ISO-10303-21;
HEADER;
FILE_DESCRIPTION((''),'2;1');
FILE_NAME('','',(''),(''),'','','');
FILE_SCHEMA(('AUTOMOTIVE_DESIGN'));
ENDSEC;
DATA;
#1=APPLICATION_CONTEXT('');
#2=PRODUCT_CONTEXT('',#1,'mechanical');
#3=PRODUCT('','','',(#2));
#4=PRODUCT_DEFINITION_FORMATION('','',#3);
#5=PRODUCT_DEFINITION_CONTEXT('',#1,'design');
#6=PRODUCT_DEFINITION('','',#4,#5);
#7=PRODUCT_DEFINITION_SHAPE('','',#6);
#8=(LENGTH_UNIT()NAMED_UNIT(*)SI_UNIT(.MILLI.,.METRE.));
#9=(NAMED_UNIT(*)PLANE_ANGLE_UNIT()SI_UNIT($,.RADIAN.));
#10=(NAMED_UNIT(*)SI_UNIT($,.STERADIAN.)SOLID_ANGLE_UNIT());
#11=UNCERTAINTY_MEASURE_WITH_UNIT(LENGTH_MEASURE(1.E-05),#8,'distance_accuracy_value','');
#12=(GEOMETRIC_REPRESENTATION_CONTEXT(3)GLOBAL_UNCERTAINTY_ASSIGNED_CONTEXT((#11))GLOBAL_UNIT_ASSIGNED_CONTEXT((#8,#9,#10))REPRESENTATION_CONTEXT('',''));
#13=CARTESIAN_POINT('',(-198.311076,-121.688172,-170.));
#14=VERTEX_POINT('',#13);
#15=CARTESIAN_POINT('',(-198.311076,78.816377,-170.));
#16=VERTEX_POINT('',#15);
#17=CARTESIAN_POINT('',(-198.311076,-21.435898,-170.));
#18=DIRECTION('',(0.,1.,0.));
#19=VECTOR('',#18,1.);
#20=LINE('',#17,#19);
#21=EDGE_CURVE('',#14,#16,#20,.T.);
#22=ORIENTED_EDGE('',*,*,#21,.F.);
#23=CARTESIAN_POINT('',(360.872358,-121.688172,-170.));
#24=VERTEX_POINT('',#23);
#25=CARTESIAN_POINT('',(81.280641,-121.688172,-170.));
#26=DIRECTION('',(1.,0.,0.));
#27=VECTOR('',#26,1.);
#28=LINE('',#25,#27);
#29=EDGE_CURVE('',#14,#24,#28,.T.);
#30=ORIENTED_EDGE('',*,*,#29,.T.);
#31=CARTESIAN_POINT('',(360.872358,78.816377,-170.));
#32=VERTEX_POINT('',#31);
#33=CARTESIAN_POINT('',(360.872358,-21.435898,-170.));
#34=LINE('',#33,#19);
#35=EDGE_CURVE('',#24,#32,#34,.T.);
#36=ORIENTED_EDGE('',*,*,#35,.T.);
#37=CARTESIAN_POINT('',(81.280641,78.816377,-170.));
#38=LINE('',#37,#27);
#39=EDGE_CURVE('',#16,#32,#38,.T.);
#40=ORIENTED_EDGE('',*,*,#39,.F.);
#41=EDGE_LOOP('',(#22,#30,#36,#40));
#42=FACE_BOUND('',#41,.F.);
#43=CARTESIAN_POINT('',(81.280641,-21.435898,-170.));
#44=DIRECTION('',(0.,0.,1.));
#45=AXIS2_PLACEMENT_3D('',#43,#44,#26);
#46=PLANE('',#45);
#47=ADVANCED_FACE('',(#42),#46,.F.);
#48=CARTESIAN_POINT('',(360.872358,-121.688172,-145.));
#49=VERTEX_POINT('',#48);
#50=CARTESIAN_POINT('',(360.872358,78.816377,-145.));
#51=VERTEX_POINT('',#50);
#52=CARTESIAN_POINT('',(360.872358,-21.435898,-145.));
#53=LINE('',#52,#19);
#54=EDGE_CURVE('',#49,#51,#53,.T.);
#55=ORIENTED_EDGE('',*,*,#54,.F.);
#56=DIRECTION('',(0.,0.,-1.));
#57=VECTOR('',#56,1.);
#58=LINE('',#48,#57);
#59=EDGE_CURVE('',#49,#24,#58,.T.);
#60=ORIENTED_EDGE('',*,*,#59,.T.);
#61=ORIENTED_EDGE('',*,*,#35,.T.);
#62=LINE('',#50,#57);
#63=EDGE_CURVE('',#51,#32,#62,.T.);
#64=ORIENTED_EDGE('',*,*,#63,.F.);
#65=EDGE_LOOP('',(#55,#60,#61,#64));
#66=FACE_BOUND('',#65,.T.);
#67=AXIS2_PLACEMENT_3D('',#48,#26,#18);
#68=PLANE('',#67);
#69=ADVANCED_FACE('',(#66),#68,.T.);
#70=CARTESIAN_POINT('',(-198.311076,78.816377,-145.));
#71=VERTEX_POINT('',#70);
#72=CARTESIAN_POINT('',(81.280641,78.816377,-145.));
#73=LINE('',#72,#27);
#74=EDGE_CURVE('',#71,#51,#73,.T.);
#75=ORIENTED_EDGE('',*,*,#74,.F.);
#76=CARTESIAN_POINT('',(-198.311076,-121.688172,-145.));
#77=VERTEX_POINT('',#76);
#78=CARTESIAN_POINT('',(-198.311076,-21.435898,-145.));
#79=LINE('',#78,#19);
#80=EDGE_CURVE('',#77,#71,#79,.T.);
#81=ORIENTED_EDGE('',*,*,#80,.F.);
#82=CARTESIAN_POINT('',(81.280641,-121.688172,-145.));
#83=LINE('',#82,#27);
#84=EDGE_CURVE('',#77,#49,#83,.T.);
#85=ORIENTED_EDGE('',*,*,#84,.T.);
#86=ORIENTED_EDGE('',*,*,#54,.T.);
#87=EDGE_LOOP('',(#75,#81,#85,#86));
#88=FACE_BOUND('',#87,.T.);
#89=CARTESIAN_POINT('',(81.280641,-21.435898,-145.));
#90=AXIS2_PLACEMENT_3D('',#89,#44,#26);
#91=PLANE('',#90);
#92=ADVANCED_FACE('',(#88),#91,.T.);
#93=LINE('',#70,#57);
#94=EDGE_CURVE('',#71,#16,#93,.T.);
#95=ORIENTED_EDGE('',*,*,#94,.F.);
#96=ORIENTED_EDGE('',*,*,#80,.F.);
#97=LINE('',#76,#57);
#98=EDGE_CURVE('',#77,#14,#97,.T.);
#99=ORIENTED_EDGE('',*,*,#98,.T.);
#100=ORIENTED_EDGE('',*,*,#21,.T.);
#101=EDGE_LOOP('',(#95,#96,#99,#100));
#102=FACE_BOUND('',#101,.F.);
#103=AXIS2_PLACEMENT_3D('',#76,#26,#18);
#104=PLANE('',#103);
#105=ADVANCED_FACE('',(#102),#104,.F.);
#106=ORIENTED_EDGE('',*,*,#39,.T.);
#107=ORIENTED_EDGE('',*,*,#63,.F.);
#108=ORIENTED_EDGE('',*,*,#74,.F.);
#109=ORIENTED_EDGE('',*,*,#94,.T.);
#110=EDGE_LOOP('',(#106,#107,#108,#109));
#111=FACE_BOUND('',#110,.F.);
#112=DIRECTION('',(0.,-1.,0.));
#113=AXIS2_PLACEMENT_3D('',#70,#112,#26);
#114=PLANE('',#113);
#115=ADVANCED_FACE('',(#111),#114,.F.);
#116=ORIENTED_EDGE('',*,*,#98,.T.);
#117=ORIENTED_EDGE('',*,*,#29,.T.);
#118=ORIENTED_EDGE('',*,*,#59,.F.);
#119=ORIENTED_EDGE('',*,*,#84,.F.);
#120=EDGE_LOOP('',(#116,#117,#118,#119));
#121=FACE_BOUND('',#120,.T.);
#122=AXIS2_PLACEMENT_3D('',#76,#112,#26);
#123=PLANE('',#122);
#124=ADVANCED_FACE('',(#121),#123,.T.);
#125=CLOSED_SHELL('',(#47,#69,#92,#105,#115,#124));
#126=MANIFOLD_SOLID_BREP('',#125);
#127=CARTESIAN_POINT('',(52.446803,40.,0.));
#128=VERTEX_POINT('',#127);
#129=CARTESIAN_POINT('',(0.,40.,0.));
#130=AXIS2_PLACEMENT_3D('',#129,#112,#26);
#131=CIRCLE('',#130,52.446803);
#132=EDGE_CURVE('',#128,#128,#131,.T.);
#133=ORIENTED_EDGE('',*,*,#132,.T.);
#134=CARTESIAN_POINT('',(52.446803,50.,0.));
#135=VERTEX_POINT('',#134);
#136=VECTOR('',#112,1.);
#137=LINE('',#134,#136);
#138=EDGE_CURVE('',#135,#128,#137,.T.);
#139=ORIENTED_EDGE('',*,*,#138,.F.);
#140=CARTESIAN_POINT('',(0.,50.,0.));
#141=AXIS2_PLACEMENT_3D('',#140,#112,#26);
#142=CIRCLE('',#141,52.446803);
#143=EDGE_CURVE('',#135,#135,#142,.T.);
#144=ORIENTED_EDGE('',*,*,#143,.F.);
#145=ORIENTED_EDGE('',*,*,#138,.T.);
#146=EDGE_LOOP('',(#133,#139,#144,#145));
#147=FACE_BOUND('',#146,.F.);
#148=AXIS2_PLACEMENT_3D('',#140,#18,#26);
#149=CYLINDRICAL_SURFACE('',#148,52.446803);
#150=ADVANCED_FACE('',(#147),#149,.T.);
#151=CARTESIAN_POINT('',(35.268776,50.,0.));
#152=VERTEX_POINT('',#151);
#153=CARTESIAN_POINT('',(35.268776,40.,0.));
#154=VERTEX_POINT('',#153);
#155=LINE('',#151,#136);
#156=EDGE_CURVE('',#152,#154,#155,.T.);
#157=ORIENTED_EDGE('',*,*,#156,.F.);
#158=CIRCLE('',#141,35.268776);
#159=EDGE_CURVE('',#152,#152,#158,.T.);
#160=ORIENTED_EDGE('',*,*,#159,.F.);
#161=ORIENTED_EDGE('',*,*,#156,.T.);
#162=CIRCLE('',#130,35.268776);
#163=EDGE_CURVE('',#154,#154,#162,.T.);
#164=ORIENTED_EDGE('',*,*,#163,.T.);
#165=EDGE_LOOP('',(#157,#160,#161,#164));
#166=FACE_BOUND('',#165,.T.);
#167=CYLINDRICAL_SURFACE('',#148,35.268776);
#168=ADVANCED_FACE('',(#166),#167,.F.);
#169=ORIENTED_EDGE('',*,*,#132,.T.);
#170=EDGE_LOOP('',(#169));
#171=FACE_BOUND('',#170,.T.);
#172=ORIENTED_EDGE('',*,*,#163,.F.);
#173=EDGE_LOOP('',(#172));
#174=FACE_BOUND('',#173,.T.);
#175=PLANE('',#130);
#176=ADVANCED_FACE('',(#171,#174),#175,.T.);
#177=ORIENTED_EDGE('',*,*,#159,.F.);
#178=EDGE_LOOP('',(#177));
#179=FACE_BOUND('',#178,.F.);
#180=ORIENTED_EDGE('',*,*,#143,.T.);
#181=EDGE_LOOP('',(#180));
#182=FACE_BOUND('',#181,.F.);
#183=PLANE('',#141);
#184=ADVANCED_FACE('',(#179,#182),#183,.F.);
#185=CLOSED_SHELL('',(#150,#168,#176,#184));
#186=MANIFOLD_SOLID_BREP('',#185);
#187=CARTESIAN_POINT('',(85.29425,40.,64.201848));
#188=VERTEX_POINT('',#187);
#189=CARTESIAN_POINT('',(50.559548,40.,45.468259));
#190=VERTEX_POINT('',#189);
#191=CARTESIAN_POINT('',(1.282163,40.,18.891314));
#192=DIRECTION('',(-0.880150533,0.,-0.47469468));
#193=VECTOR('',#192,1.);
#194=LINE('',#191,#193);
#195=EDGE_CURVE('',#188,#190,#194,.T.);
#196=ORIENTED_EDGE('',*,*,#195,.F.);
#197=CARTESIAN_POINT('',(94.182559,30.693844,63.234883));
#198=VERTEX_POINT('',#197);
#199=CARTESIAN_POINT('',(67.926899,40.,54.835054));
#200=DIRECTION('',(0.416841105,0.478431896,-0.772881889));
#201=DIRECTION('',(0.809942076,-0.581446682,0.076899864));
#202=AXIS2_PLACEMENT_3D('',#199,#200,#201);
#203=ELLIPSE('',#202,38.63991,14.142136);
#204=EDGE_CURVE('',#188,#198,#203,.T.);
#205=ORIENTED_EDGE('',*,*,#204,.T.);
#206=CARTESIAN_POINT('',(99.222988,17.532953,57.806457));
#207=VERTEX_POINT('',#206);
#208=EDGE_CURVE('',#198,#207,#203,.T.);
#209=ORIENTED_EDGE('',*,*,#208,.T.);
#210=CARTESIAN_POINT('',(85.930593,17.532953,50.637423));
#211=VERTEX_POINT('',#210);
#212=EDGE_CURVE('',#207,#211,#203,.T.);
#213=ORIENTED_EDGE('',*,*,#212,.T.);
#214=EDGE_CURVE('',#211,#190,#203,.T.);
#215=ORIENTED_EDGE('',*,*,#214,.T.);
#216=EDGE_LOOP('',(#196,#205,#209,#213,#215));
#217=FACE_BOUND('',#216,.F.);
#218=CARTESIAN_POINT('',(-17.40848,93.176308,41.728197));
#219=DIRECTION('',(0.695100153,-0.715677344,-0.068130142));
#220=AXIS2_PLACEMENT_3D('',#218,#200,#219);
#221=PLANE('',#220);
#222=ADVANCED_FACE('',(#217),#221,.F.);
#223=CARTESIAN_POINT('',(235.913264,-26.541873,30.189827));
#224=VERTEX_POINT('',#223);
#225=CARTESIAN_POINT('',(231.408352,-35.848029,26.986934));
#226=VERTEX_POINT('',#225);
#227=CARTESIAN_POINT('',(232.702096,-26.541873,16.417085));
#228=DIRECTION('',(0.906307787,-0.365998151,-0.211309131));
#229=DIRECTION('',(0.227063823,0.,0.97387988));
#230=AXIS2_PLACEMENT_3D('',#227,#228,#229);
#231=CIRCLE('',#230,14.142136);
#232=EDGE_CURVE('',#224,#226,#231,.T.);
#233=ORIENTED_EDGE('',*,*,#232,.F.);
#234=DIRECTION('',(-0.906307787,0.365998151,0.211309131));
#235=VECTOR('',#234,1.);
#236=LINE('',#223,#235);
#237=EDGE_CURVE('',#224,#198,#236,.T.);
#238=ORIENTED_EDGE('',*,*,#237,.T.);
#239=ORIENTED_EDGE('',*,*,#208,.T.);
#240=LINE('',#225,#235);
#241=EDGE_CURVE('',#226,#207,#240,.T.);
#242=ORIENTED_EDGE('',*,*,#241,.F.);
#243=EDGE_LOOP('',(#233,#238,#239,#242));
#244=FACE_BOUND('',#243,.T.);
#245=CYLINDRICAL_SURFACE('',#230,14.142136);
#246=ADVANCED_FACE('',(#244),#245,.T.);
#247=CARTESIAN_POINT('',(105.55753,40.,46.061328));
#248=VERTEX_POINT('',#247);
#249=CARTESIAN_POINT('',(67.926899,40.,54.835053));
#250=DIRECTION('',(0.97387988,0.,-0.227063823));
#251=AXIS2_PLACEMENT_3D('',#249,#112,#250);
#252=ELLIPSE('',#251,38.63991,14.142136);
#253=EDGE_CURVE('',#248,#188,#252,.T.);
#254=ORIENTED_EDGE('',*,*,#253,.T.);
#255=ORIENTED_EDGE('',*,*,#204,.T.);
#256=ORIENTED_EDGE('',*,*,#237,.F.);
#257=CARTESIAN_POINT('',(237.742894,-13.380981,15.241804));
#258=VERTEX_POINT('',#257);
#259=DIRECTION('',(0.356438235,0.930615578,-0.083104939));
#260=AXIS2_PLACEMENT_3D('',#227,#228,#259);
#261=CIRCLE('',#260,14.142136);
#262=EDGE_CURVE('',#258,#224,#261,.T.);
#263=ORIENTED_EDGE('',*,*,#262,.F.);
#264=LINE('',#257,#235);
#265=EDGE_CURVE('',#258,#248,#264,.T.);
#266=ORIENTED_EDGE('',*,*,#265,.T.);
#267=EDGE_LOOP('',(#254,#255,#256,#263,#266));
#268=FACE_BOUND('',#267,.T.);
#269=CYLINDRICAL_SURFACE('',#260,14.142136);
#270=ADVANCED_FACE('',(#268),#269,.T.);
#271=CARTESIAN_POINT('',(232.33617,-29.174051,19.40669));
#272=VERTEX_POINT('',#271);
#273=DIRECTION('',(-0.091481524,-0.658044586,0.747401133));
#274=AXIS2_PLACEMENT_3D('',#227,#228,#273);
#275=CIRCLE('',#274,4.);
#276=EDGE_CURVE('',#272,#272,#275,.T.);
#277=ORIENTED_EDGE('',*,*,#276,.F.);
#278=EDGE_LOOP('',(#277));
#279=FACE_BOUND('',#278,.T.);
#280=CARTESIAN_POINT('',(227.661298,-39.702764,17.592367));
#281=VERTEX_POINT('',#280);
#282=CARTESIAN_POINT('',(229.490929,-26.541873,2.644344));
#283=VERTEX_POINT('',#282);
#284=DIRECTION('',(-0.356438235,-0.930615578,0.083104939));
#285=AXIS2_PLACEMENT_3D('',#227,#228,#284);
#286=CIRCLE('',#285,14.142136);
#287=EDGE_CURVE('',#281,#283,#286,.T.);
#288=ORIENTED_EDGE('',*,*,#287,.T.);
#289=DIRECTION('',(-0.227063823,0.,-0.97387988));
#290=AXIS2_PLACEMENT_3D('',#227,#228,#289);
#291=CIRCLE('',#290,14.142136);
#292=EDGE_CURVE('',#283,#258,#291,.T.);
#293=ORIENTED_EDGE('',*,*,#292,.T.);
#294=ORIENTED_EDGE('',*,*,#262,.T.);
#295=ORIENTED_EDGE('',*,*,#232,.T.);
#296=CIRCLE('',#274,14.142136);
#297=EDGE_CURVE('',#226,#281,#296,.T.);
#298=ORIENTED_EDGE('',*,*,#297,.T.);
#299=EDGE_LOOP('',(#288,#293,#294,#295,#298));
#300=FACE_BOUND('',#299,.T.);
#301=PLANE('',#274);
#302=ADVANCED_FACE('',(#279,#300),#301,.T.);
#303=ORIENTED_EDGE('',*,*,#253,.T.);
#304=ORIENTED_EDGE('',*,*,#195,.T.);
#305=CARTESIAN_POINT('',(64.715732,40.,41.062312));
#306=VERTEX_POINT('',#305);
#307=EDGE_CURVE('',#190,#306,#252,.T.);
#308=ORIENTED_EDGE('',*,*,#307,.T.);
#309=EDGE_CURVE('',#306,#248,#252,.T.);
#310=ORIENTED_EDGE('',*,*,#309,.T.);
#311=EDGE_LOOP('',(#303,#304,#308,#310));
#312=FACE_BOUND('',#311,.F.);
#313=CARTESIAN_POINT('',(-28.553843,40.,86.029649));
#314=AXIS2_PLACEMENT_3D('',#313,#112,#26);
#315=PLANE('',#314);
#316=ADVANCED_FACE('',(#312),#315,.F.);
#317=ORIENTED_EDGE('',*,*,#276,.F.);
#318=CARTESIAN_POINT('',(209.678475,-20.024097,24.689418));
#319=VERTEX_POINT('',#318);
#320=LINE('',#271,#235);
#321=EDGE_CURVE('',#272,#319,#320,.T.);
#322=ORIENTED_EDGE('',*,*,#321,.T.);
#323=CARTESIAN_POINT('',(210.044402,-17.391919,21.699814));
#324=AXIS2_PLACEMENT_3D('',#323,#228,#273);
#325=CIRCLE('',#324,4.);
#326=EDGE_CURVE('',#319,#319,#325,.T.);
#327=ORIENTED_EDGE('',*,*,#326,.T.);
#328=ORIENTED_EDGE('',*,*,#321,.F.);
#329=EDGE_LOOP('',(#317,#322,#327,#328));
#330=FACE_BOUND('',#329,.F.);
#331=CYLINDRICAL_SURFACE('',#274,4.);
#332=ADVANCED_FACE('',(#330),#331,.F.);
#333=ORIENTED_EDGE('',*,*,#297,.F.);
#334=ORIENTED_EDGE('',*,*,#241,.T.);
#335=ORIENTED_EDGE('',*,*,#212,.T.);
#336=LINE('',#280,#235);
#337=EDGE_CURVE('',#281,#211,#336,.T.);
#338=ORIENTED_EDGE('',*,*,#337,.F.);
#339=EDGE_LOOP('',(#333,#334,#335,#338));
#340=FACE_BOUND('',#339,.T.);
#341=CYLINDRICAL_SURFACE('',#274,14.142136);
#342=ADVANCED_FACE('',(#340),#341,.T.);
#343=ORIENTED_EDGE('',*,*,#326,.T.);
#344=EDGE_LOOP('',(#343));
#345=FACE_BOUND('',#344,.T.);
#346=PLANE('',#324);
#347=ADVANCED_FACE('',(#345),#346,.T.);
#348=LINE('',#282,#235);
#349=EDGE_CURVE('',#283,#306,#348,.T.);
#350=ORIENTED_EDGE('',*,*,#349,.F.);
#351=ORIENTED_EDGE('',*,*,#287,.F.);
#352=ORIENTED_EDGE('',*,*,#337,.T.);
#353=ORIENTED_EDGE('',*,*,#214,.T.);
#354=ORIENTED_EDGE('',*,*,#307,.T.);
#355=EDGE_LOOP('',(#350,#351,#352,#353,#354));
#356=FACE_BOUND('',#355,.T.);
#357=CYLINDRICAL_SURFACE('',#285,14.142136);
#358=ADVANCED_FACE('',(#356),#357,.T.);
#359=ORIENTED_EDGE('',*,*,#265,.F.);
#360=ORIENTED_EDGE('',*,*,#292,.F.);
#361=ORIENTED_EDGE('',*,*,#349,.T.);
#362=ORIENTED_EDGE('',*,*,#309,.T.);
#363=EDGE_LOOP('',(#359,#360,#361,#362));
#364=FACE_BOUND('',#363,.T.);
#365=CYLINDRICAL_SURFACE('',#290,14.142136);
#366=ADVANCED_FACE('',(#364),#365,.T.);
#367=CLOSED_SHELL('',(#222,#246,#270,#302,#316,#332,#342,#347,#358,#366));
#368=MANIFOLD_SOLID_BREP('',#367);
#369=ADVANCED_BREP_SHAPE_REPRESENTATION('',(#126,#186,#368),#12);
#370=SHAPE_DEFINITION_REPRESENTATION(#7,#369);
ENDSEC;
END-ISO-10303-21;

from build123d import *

# Parameters (mm, degrees)
F2_R      = 52.4468032927
F2_R_2    = 35.2687757181
F3_DEPTH  = 10
F9_W      = 20
F9_H      = 20
F9_R      = 4
F10_DEPTH = 2000
F11_DEPTH = 25
F13_W     = 559.1834336519
F13_H     = 200.5045488477
F14_DEPTH = 25
F16_W     = 3887.4027729034
F16_H     = 3285.4166030884
F18_DEPTH = 678.6163205323
F19_ANGLE = -225
F21_W     = 3887.4027729034
F21_H     = 3285.4166030884
F22_DEPTH = 38.8173766265


with BuildPart() as f3:
    # F2 (on offset) → F3 (new body)
    with BuildSketch(Plane.XZ.offset(-50)):
        Circle(F2_R)
        Circle(F2_R_2, mode=Mode.SUBTRACT)
    extrude(amount=F3_DEPTH)


with BuildPart() as f10:
    # F9 (on face) → F10 (new body)
    with BuildSketch(Plane(origin=(196.8001302702, -79.4746385064, -45.8847039354), x_dir=(0.3564382351, 0.9306155778, -0.0831049393), z_dir=(0.906307787, -0.3659981508, -0.2113091309))):
        with Locations((56.8793033835, 68.8264967326)):
            Rectangle(F9_W, F9_H)
        with Locations((56.8793033835, 68.8264967326)):
            Circle(F9_R, mode=Mode.SUBTRACT)
        with Locations((56.8793033835, 68.8264967326)):
            Circle(F9_R)
        with BuildLine():
            Line((46.8793033835, 58.8264967326), (46.8793033835, 78.8264967326))
            ThreePointArc((46.8793033835, 78.8264967326), (42.7371677598, 68.8264967326), (46.8793033835, 58.8264967326))
        make_face()
        with BuildLine():
            Line((46.8793033835, 78.8264967326), (66.8793033835, 78.8264967326))
            ThreePointArc((66.8793033835, 78.8264967326), (56.8793033835, 82.9686323564), (46.8793033835, 78.8264967326))
        make_face()
        with BuildLine():
            ThreePointArc((71.0214390072, 68.8264967326), (69.9449330323, 74.2384577341), (66.8793033835, 78.8264967326))
            Line((66.8793033835, 78.8264967326), (66.8793033835, 58.8264967326))
            ThreePointArc((66.8793033835, 58.8264967326), (69.9449330323, 63.4145357312), (71.0214390072, 68.8264967326))
        make_face()
        with BuildLine():
            ThreePointArc((46.8793033835, 58.8264967326), (56.8793033835, 54.6843611089), (66.8793033835, 58.8264967326))
            Line((66.8793033835, 58.8264967326), (46.8793033835, 58.8264967326))
        make_face()
    extrude(amount=-F10_DEPTH)

    # F9 (on face) → F11 (cut)
    with BuildSketch(Plane(origin=(196.8001302702, -79.4746385064, -45.8847039354), x_dir=(0.3564382351, 0.9306155778, -0.0831049393), z_dir=(0.906307787, -0.3659981508, -0.2113091309))):
        with Locations((56.8793033835, 68.8264967326)):
            Circle(F9_R)
    extrude(amount=-F11_DEPTH, mode=Mode.SUBTRACT)


with BuildPart() as f14:
    # F13 (on offset) → F14 (new body)
    with BuildSketch(Plane.XY.offset(-145)):
        with Locations((81.2806412578, -21.4358977973)):
            Rectangle(F13_W, F13_H)
    extrude(amount=-F14_DEPTH)


with BuildPart() as f10_1:
    # F17: moved
    add(f10.part)

    # F16 (on offset) → F18 (cut, through all)
    with BuildSketch(Plane.XZ.offset(-40)):
        with Locations((-28.5538434982, 86.0296487808)):
            Rectangle(F16_W, F16_H)
    extrude(amount=-F18_DEPTH, mode=Mode.SUBTRACT)


with BuildPart() as f10_2:
    # F19: moved
    add(f10_1.part.rotate(Axis((232.7020962549, -26.5418727237, 16.4170853719), (0.906307787, -0.3659981508, -0.2113091309)), F19_ANGLE))

    # F21 (on offset) → F22 (cut, through all)
    with BuildSketch(Plane.XZ.offset(-40)):
        with Locations((-28.5538434982, 86.0296487808)):
            Rectangle(F21_W, F21_H)
    extrude(amount=-F22_DEPTH, mode=Mode.SUBTRACT)


solid = Compound([f3.part, f14.part, f10_2.part])
